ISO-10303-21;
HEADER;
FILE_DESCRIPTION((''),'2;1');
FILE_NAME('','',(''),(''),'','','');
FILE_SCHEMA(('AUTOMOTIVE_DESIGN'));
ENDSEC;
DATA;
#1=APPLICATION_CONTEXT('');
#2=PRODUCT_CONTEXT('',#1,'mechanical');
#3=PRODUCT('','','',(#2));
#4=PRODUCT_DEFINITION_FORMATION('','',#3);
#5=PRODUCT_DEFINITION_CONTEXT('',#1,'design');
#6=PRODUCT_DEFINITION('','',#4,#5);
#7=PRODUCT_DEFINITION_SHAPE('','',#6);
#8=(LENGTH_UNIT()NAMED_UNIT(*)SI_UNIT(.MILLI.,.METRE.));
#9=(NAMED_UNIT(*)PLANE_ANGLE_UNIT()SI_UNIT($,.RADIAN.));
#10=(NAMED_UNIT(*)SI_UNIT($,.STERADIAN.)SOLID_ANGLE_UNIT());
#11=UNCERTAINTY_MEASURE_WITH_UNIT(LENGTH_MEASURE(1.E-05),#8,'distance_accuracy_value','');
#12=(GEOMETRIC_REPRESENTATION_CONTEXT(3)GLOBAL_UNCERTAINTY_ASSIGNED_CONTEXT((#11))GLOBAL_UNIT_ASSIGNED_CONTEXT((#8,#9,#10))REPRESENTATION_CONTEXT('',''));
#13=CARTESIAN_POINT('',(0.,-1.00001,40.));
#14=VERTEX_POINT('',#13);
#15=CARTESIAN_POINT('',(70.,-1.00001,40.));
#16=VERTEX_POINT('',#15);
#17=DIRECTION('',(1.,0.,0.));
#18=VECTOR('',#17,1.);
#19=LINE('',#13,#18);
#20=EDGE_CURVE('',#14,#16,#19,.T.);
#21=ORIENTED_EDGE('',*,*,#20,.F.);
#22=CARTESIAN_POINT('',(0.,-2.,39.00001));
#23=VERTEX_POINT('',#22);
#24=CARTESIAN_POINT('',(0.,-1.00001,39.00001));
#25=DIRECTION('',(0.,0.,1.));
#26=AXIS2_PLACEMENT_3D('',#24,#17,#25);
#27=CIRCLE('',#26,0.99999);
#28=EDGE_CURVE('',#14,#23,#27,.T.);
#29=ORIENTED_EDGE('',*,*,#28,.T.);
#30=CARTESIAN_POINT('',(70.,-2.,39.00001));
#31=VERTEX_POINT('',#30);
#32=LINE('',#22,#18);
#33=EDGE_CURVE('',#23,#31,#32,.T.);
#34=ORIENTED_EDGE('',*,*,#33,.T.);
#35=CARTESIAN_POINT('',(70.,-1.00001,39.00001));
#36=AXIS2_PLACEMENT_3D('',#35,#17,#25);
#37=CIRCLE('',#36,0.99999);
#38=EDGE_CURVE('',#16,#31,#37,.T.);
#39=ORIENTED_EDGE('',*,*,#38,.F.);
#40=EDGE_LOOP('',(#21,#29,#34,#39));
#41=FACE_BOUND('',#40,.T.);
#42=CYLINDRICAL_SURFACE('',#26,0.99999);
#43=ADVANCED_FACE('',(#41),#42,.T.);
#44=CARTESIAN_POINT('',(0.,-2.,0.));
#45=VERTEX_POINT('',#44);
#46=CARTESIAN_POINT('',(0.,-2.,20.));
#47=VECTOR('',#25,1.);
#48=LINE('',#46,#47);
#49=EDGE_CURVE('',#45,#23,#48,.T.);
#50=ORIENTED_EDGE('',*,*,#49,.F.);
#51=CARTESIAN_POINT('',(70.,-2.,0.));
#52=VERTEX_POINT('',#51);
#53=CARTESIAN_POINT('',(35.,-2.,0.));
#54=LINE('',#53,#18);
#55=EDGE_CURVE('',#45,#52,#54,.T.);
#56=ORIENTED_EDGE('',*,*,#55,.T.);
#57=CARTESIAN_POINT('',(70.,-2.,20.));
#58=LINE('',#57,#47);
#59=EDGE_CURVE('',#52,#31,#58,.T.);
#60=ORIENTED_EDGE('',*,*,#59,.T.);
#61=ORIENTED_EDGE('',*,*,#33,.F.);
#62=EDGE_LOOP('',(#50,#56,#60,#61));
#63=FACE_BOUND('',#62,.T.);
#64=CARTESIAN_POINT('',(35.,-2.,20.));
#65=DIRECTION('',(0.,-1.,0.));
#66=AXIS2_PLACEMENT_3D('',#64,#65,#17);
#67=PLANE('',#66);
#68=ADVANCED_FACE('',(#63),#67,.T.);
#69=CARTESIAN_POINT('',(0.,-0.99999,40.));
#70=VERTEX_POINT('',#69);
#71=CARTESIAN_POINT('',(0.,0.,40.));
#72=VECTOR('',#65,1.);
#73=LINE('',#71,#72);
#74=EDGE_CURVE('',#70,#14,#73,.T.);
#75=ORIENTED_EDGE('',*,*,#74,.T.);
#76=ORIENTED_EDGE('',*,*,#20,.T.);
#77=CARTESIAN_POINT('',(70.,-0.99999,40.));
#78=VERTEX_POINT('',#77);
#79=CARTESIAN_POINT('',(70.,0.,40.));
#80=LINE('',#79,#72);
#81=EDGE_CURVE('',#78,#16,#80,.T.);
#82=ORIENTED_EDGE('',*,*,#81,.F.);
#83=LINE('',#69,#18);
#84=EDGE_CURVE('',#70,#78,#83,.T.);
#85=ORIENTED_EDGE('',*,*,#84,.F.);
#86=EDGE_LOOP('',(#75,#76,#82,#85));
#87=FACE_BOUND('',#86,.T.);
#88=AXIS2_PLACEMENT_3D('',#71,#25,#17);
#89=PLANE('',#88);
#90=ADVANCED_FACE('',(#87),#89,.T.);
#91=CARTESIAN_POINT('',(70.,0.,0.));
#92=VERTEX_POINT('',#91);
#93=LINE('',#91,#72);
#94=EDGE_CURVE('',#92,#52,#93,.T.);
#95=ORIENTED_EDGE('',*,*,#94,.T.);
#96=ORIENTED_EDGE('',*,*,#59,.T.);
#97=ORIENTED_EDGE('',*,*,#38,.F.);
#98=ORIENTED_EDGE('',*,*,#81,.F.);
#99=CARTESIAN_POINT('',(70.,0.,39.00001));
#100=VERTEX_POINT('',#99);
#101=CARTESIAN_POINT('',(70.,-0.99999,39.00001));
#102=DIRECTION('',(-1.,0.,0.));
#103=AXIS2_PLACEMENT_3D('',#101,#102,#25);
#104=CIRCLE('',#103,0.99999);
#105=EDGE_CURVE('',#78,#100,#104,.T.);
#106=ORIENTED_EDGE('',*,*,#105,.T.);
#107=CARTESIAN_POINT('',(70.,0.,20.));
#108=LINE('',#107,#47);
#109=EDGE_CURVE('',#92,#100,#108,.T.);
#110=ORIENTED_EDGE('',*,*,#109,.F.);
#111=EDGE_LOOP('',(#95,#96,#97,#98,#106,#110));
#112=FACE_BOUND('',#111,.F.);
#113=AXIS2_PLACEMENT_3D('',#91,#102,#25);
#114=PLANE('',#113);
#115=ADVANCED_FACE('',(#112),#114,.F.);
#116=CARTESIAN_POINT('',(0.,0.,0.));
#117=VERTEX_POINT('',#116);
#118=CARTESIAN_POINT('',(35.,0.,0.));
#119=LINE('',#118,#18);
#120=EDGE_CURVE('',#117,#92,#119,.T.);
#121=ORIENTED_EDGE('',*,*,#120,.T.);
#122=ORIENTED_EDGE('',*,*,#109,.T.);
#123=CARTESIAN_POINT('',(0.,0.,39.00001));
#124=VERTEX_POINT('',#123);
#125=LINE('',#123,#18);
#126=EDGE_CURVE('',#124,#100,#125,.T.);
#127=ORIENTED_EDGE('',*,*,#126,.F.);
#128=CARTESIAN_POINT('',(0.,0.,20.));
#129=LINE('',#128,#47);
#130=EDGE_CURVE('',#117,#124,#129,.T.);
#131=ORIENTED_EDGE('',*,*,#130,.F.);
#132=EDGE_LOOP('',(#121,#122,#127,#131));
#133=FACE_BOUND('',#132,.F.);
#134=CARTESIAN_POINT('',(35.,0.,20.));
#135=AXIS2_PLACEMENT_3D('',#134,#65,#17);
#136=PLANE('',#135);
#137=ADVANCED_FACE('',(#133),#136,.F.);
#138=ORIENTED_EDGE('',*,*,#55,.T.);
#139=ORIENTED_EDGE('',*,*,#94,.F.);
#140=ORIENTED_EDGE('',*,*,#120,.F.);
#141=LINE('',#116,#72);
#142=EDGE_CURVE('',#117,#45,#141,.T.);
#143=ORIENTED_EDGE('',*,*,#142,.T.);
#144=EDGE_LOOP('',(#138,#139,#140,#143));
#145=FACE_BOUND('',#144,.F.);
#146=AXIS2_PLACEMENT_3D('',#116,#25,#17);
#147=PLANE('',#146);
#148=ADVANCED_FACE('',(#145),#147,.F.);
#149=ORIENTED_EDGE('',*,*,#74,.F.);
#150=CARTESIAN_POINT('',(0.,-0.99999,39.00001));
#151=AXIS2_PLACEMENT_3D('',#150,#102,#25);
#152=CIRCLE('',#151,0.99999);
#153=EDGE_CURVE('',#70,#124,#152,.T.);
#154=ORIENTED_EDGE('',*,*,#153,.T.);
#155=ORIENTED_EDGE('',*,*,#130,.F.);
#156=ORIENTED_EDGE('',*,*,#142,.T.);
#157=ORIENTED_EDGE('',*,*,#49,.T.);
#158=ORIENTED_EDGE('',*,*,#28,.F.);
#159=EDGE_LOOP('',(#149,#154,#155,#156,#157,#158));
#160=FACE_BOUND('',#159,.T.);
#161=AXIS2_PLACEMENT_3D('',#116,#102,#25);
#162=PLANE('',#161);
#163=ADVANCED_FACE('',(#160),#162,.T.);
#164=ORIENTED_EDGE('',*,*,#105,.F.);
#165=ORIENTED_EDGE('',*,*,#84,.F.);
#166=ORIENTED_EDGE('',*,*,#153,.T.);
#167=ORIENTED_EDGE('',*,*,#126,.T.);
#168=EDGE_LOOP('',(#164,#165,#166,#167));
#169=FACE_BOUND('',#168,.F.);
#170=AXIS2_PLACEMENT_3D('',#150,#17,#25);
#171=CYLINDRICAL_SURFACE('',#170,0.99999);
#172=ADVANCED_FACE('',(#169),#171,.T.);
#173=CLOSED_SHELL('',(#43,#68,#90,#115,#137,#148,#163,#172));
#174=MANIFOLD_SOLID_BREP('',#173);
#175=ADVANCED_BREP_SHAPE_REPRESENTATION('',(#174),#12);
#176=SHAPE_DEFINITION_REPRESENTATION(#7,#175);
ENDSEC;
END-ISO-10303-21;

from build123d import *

# Parameters (mm, degrees)
F0_W     = 92.5
F0_H     = 20
F1_DEPTH = 1.4
F2_W     = 2
F2_H     = 2
F3_DEPTH = 25
F4_R     = 0.8
F6_W     = 70
F6_H     = 40
F7_DEPTH = 2
F8_R     = 0.99999


# Not quite as in the source:
# - a fillet or chamfer is up to 0.001 mm smaller than in the source, because OpenCascade refuses the exact size


with BuildPart() as f1:
    # F0 (on Top) → F1 (new body)
    with BuildSketch(Plane.XY):
        with Locations((46.25, 10)):
            Rectangle(F0_W, F0_H)
    extrude(amount=F1_DEPTH)

    # F2 (on face) → F3 (cut)
    with BuildSketch(Plane.XY.offset(1.4)):
        with Locations((1, 3.4)):
            Rectangle(F2_W, F2_H)
        with Locations((1, 7.8)):
            Rectangle(F2_W, F2_H)
        with Locations((1, 12.2)):
            Rectangle(F2_W, F2_H)
        with Locations((1, 16.6)):
            Rectangle(F2_W, F2_H)
    extrude(amount=-F3_DEPTH, mode=Mode.SUBTRACT)

    # F4
    f4_edges = [f1.edges().sort_by_distance(p)[0] for p in [
        (2, 15.6, 0.7),
        (2, 17.6, 0.7),
        (2, 13.2, 0.7),
        (2, 11.2, 0.7),
        (2, 6.8, 0.7),
        (2, 8.8, 0.7),
        (2, 4.4, 0.7),
        (2, 2.4, 0.7),
    ]]
    fillet(f4_edges, radius=F4_R)


with BuildPart() as f7:
    # F6 (on Front) → F7 (new body)
    with BuildSketch(Plane.XZ):
        with Locations((35, 20)):
            Rectangle(F6_W, F6_H)
    extrude(amount=F7_DEPTH)

    # F8 (radius 1 in the source; OpenCascade refuses exactly that, so slightly less here)
    f8_edges = [f7.edges().sort_by_distance(p)[0] for p in [
        (35, -2, 40),
        (35, 0, 40),
    ]]
    fillet(f8_edges, radius=F8_R)


solid = f7.part
